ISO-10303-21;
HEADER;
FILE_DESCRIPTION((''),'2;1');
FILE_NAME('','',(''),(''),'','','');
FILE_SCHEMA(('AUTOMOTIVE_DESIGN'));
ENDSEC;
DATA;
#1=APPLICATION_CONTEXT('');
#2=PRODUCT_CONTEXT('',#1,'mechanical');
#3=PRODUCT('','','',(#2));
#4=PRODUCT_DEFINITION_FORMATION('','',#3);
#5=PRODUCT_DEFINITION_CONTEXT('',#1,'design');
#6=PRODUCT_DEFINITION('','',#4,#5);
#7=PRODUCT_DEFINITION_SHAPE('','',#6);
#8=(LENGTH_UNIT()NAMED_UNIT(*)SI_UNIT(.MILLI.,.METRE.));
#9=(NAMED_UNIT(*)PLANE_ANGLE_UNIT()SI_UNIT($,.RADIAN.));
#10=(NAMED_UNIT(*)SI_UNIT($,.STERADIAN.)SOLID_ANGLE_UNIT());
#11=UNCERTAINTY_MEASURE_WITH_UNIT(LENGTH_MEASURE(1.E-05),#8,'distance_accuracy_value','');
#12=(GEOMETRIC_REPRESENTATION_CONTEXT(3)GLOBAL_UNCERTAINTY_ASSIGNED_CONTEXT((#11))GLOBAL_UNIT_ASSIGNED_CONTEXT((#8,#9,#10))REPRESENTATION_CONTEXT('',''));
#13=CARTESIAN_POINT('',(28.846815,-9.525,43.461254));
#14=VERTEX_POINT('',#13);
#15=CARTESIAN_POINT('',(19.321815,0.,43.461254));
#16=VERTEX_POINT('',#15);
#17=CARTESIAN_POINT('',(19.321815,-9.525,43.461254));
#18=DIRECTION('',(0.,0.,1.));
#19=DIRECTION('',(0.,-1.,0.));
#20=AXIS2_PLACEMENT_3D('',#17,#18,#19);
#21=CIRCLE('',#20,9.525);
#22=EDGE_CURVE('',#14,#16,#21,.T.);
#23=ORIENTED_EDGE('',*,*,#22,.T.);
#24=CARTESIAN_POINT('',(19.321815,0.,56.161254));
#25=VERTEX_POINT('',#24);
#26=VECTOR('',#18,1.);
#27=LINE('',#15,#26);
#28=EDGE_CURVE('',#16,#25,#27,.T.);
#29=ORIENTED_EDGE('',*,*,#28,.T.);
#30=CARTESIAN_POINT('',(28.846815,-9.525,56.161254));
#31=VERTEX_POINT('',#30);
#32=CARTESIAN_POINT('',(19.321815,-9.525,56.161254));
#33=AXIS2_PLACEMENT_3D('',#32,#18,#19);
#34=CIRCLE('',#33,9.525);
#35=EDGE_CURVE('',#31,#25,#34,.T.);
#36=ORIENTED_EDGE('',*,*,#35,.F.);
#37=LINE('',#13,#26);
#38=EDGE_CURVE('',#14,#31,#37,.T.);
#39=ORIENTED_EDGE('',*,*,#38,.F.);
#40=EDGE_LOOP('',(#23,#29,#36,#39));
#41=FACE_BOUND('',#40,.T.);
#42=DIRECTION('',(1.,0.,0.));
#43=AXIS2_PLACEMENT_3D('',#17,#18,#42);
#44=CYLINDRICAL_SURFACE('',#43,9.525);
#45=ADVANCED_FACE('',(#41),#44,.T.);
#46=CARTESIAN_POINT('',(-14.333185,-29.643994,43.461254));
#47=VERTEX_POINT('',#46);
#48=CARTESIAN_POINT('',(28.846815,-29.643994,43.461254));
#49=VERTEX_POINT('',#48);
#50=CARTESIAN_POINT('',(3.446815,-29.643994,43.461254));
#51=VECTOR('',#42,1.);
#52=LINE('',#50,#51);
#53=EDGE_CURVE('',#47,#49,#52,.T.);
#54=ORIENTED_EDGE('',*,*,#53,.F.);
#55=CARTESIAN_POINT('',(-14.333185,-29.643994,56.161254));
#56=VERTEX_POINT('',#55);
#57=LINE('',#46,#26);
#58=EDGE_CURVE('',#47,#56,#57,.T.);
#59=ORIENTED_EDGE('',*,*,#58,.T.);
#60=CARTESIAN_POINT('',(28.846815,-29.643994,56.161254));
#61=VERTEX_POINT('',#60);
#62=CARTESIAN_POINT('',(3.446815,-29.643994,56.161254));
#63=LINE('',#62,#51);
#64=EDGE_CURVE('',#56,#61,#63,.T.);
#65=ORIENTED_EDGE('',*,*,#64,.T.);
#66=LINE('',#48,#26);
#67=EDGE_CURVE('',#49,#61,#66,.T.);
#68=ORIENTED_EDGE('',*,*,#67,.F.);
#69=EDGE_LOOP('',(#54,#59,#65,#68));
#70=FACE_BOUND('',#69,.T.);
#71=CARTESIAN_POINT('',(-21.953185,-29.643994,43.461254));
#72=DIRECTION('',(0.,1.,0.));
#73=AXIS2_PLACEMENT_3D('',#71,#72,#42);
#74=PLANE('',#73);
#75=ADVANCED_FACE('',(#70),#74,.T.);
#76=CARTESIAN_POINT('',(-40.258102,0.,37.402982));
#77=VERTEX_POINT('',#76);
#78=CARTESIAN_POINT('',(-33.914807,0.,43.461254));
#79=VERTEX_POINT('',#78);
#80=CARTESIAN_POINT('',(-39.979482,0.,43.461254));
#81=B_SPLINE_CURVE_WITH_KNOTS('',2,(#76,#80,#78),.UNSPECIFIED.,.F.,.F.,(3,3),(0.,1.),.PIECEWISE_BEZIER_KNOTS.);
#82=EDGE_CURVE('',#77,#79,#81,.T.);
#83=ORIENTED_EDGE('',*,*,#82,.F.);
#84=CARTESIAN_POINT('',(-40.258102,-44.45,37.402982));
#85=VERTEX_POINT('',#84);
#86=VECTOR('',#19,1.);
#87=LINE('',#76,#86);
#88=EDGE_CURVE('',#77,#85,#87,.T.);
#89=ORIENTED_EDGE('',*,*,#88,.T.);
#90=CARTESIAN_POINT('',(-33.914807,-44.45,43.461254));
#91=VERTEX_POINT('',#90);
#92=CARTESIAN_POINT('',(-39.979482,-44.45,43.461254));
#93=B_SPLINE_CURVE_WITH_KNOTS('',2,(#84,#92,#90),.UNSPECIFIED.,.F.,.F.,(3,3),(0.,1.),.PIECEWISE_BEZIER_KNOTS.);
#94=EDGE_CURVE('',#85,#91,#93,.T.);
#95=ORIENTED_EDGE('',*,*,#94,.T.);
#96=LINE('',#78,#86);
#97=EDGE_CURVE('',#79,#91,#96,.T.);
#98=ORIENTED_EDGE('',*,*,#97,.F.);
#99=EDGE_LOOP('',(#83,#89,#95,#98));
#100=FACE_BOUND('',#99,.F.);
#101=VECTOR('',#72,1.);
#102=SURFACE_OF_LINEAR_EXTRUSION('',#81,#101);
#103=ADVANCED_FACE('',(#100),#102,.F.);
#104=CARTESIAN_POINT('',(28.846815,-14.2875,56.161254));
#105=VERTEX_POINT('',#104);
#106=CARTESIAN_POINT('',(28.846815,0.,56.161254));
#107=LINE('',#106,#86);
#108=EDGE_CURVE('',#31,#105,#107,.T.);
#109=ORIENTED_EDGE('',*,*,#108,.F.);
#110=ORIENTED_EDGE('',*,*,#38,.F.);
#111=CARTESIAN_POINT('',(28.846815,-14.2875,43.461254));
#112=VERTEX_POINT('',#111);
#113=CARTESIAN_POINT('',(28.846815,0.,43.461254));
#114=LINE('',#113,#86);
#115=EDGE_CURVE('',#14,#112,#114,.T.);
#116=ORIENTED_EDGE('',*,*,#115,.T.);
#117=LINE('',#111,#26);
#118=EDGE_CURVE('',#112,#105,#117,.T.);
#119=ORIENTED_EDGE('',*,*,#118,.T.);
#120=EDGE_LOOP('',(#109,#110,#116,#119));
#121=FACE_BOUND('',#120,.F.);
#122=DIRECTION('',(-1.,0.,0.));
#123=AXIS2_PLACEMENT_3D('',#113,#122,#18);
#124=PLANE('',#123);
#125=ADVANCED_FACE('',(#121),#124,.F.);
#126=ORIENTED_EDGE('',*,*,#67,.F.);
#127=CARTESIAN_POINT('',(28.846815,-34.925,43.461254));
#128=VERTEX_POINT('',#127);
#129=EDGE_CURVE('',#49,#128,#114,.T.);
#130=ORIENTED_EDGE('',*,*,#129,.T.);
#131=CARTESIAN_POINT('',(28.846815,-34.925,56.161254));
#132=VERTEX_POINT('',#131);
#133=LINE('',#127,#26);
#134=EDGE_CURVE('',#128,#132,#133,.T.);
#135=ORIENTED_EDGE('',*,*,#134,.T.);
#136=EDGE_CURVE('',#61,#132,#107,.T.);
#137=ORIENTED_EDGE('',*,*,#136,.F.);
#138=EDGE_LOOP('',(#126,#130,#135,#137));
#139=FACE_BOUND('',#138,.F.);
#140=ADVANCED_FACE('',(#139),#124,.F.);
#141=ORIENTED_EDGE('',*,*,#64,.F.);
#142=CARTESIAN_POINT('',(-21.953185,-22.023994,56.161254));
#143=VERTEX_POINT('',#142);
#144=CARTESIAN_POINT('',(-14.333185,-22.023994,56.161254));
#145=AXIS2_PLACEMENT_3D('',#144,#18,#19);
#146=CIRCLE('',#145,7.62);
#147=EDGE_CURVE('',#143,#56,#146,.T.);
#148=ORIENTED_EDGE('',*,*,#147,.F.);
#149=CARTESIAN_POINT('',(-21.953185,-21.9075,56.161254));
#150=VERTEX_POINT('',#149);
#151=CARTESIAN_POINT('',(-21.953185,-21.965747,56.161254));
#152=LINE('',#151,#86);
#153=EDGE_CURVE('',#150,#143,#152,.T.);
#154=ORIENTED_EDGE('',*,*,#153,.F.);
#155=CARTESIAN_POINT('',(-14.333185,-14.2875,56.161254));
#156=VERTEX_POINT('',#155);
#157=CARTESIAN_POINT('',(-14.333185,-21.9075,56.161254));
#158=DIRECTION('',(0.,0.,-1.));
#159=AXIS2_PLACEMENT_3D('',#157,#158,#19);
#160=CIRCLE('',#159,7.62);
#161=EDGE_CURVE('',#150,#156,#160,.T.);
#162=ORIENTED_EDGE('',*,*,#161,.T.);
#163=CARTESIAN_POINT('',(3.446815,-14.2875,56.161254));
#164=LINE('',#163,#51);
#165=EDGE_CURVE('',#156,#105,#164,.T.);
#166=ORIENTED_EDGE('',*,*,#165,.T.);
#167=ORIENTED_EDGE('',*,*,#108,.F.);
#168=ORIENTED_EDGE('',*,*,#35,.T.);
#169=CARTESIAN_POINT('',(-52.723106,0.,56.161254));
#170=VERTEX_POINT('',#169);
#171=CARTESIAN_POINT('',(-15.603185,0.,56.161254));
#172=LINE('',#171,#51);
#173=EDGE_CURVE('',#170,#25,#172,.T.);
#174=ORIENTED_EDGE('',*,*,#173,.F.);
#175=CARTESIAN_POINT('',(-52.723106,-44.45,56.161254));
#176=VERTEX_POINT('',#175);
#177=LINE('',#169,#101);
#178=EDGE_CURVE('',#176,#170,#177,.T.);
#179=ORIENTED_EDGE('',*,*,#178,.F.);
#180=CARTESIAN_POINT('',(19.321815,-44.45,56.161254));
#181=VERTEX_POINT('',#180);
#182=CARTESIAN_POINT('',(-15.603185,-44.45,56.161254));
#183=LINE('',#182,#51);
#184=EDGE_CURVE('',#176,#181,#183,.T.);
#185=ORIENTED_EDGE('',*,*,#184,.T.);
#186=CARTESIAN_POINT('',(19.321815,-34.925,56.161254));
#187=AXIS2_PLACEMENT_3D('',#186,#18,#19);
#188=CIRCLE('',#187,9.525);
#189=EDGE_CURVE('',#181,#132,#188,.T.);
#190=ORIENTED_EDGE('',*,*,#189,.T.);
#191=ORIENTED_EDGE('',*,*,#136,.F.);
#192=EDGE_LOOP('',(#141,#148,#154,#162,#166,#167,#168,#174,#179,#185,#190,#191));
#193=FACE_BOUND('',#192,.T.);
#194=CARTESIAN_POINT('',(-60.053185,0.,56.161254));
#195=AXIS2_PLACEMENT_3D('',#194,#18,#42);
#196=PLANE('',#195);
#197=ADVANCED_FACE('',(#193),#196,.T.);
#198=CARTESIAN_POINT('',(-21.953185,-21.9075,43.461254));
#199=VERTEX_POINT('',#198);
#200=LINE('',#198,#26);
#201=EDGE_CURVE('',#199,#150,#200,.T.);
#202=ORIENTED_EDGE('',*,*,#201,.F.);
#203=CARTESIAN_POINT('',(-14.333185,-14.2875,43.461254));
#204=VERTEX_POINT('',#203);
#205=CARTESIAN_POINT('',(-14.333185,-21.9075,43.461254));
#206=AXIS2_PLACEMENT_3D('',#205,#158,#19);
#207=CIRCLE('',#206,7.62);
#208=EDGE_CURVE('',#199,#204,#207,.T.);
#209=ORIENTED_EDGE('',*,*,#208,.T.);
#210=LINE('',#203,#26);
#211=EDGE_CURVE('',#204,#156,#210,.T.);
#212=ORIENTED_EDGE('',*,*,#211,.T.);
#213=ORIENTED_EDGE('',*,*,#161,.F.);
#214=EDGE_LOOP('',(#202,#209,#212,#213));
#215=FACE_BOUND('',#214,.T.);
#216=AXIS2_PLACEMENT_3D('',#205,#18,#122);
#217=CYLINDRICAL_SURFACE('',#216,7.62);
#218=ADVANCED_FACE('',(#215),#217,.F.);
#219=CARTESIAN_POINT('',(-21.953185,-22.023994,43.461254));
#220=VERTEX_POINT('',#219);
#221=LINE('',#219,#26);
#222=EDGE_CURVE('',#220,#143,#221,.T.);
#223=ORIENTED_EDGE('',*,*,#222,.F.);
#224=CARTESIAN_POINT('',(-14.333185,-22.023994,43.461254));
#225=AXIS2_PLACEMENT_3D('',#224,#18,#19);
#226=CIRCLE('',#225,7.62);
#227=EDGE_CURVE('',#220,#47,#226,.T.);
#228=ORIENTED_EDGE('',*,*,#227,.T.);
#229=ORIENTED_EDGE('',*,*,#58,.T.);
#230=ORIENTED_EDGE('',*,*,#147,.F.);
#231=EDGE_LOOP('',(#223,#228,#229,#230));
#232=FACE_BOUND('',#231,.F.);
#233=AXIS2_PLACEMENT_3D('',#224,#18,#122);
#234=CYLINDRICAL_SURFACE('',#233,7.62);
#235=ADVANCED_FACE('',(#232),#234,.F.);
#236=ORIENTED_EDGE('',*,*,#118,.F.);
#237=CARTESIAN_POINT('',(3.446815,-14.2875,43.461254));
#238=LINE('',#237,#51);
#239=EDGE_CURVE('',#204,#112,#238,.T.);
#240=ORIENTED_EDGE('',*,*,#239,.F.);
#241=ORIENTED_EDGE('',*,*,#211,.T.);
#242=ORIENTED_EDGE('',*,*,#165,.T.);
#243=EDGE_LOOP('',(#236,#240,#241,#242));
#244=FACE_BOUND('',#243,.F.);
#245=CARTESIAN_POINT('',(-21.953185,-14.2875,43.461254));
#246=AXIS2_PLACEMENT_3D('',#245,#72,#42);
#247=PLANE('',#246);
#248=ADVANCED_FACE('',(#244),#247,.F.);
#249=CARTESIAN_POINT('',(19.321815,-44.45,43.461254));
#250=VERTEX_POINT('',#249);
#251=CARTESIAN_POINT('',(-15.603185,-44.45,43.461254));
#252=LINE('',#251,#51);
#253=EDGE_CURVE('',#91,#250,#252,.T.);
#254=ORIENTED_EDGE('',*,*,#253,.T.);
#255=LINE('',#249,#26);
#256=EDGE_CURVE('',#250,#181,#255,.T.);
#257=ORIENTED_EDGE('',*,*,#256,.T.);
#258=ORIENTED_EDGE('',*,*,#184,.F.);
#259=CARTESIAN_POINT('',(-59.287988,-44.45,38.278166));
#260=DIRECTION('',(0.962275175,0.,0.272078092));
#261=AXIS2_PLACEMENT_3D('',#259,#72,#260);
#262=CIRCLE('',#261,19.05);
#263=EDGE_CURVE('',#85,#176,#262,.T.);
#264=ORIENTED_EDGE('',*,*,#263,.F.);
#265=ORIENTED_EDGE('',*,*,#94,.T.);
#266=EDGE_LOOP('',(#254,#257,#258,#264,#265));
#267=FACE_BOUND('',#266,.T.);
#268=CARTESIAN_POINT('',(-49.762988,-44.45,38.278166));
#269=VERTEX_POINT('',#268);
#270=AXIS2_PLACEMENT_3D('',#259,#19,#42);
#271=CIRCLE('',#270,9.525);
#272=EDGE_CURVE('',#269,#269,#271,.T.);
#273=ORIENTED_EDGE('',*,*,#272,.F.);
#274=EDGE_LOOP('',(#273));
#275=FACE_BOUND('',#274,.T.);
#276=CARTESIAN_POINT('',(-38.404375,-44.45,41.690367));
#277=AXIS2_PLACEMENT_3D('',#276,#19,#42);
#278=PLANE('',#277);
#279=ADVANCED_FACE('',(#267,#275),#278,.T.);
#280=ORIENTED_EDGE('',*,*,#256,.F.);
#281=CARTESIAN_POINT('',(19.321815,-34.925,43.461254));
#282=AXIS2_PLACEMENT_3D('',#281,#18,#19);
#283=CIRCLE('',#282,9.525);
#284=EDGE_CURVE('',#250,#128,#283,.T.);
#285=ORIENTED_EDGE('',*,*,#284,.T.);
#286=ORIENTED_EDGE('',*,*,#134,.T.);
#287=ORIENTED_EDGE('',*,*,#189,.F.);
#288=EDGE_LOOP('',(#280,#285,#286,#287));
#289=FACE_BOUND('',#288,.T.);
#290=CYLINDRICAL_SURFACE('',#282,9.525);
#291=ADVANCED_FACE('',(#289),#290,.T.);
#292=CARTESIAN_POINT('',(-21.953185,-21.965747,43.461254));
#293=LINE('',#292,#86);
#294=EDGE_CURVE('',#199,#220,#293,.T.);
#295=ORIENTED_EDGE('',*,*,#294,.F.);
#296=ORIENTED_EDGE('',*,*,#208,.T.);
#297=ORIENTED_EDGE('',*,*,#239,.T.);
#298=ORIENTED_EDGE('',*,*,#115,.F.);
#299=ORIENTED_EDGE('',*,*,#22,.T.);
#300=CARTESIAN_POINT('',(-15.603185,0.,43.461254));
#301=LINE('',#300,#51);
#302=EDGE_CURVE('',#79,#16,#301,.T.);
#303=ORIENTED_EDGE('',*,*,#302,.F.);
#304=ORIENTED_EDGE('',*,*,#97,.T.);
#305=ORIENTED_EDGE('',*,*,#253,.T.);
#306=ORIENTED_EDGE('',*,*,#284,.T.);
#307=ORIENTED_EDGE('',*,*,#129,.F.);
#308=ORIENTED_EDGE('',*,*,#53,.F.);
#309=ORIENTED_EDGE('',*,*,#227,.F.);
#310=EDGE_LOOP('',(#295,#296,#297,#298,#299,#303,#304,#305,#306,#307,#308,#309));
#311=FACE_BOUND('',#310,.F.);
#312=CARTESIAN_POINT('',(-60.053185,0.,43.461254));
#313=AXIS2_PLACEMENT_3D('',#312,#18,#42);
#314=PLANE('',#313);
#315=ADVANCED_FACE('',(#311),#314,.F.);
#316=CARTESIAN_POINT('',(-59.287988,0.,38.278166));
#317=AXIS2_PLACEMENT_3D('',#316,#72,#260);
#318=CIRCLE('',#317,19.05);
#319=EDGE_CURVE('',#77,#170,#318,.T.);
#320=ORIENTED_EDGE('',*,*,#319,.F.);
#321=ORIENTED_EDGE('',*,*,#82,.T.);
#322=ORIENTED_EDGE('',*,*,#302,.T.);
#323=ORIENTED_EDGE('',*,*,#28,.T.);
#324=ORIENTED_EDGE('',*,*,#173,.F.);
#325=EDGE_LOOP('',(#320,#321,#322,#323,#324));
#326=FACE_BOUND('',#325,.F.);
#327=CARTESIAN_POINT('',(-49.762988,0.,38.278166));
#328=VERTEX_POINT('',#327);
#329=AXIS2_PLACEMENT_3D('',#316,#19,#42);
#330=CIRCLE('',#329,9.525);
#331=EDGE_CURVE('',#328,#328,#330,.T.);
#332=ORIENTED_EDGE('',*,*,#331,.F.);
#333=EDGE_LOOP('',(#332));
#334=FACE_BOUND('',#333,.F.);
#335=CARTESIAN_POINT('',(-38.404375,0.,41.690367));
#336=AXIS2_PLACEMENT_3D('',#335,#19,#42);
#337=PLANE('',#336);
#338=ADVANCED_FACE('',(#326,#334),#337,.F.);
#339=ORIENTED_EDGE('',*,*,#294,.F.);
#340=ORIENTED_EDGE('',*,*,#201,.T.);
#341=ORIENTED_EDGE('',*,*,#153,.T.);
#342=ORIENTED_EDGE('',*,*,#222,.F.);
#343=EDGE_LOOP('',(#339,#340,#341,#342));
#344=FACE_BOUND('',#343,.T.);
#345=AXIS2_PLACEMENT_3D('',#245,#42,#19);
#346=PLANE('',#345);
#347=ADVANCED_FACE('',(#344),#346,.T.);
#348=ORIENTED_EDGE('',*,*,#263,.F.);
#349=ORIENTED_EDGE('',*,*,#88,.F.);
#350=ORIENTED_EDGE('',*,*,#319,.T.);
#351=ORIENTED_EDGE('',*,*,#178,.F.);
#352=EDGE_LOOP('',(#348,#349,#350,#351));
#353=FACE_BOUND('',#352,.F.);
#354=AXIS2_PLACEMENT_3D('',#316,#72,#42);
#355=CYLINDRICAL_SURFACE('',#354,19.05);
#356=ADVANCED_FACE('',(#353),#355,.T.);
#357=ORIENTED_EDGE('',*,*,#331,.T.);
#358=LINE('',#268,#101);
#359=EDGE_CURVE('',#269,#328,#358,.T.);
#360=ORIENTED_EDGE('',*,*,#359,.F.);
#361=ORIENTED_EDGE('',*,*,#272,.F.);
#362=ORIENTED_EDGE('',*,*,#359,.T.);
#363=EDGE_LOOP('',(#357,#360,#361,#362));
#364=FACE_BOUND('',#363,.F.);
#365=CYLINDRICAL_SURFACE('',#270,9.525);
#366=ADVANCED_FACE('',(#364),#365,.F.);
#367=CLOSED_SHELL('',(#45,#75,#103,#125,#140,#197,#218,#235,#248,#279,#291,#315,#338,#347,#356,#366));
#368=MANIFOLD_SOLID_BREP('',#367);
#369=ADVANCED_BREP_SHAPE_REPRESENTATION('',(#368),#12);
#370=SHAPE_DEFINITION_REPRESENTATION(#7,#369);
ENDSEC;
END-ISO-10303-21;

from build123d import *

# Parameters (mm, degrees)
F0_R        = 19.05
F1_DEPTH    = 44.45
F2_W        = 88.9
F2_H        = 12.7
F3_DEPTH    = 44.45
F4_T1_DEPTH = 44.45
F5_R        = 9.525
F6_DEPTH    = 44.45
F7_W        = 50.8
F7_H        = 15.3564938247
F8_DEPTH    = 12.7
F9_R        = 7.62
F10_R       = 7.62
F11_R       = 9.525
F12_R       = 9.525


# Not quite as in the source:
# - a fillet or chamfer that OpenCascade refuses, or shapes differently, is made with other operations: its cross-section is extruded or revolved along the edge and cut away or added


with BuildPart() as f1:
    # F0 (on Front) → F1 (new body)
    with BuildSketch(Plane.XZ):
        with Locations((-59.2879876494, 38.2781662047)):
            Circle(F0_R)
    extrude(amount=F1_DEPTH)

    # F2 (on Front) → F3 (join)
    with BuildSketch(Plane.XZ):
        with Locations((-15.6031847, 49.8112538493)):
            Rectangle(F2_W, F2_H)
    extrude(amount=F3_DEPTH)

    # F4: fillet of radius 6.35 on 1 edges, made by hand

    # F4_s2 → F4_t1 (join)
    with BuildSketch(Plane.XZ):
        with BuildLine():
            add(Edge.make_bspline(
                [(-40.2581018773, 37.4029819382), (-39.9794820095, 43.4612538493), (-33.91480662, 43.4612538493)],
                knots=[0, 0, 0, 1, 1, 1], degree=2, weights=[1, 1, 1]))
            Line((-33.91480662, 43.4612538493), (-40.9566455691, 43.4612538493))
            ThreePointArc((-40.9566455691, 43.4612538493), (-40.3633740127, 40.4602520649), (-40.2581018773, 37.4029819382))
        make_face()
    extrude(amount=F4_T1_DEPTH)

    # F5 (on face) → F6 (cut)
    with BuildSketch(Plane.XZ.offset(44.45)):
        with Locations((-59.2879876494, 38.2781662047)):
            Circle(F5_R)
    extrude(amount=-F6_DEPTH, mode=Mode.SUBTRACT)

    # F7 (on face) → F8 (cut)
    with BuildSketch(Plane(origin=(0, 0, 43.4612538493), x_dir=(1, 0, 0), z_dir=(0, 0, -1))):
        with Locations((3.4468153, 21.9657469124)):
            Rectangle(F7_W, F7_H)
    extrude(amount=-F8_DEPTH, mode=Mode.SUBTRACT)

    # F9
    f9_edges = [f1.edges().sort_by_distance(p)[0] for p in [
        (-21.953185, -29.643994, 49.811254),
    ]]
    fillet(f9_edges, radius=F9_R)

    # F10
    f10_edges = [f1.edges().sort_by_distance(p)[0] for p in [
        (-21.953185, -14.2875, 49.811254),
    ]]
    fillet(f10_edges, radius=F10_R)

    # F11
    f11_edges = [f1.edges().sort_by_distance(p)[0] for p in [
        (28.846815, 0, 49.811254),
    ]]
    fillet(f11_edges, radius=F11_R)

    # F12
    f12_edges = [f1.edges().sort_by_distance(p)[0] for p in [
        (28.846815, -44.45, 49.811254),
    ]]
    fillet(f12_edges, radius=F12_R)


solid = f1.part
